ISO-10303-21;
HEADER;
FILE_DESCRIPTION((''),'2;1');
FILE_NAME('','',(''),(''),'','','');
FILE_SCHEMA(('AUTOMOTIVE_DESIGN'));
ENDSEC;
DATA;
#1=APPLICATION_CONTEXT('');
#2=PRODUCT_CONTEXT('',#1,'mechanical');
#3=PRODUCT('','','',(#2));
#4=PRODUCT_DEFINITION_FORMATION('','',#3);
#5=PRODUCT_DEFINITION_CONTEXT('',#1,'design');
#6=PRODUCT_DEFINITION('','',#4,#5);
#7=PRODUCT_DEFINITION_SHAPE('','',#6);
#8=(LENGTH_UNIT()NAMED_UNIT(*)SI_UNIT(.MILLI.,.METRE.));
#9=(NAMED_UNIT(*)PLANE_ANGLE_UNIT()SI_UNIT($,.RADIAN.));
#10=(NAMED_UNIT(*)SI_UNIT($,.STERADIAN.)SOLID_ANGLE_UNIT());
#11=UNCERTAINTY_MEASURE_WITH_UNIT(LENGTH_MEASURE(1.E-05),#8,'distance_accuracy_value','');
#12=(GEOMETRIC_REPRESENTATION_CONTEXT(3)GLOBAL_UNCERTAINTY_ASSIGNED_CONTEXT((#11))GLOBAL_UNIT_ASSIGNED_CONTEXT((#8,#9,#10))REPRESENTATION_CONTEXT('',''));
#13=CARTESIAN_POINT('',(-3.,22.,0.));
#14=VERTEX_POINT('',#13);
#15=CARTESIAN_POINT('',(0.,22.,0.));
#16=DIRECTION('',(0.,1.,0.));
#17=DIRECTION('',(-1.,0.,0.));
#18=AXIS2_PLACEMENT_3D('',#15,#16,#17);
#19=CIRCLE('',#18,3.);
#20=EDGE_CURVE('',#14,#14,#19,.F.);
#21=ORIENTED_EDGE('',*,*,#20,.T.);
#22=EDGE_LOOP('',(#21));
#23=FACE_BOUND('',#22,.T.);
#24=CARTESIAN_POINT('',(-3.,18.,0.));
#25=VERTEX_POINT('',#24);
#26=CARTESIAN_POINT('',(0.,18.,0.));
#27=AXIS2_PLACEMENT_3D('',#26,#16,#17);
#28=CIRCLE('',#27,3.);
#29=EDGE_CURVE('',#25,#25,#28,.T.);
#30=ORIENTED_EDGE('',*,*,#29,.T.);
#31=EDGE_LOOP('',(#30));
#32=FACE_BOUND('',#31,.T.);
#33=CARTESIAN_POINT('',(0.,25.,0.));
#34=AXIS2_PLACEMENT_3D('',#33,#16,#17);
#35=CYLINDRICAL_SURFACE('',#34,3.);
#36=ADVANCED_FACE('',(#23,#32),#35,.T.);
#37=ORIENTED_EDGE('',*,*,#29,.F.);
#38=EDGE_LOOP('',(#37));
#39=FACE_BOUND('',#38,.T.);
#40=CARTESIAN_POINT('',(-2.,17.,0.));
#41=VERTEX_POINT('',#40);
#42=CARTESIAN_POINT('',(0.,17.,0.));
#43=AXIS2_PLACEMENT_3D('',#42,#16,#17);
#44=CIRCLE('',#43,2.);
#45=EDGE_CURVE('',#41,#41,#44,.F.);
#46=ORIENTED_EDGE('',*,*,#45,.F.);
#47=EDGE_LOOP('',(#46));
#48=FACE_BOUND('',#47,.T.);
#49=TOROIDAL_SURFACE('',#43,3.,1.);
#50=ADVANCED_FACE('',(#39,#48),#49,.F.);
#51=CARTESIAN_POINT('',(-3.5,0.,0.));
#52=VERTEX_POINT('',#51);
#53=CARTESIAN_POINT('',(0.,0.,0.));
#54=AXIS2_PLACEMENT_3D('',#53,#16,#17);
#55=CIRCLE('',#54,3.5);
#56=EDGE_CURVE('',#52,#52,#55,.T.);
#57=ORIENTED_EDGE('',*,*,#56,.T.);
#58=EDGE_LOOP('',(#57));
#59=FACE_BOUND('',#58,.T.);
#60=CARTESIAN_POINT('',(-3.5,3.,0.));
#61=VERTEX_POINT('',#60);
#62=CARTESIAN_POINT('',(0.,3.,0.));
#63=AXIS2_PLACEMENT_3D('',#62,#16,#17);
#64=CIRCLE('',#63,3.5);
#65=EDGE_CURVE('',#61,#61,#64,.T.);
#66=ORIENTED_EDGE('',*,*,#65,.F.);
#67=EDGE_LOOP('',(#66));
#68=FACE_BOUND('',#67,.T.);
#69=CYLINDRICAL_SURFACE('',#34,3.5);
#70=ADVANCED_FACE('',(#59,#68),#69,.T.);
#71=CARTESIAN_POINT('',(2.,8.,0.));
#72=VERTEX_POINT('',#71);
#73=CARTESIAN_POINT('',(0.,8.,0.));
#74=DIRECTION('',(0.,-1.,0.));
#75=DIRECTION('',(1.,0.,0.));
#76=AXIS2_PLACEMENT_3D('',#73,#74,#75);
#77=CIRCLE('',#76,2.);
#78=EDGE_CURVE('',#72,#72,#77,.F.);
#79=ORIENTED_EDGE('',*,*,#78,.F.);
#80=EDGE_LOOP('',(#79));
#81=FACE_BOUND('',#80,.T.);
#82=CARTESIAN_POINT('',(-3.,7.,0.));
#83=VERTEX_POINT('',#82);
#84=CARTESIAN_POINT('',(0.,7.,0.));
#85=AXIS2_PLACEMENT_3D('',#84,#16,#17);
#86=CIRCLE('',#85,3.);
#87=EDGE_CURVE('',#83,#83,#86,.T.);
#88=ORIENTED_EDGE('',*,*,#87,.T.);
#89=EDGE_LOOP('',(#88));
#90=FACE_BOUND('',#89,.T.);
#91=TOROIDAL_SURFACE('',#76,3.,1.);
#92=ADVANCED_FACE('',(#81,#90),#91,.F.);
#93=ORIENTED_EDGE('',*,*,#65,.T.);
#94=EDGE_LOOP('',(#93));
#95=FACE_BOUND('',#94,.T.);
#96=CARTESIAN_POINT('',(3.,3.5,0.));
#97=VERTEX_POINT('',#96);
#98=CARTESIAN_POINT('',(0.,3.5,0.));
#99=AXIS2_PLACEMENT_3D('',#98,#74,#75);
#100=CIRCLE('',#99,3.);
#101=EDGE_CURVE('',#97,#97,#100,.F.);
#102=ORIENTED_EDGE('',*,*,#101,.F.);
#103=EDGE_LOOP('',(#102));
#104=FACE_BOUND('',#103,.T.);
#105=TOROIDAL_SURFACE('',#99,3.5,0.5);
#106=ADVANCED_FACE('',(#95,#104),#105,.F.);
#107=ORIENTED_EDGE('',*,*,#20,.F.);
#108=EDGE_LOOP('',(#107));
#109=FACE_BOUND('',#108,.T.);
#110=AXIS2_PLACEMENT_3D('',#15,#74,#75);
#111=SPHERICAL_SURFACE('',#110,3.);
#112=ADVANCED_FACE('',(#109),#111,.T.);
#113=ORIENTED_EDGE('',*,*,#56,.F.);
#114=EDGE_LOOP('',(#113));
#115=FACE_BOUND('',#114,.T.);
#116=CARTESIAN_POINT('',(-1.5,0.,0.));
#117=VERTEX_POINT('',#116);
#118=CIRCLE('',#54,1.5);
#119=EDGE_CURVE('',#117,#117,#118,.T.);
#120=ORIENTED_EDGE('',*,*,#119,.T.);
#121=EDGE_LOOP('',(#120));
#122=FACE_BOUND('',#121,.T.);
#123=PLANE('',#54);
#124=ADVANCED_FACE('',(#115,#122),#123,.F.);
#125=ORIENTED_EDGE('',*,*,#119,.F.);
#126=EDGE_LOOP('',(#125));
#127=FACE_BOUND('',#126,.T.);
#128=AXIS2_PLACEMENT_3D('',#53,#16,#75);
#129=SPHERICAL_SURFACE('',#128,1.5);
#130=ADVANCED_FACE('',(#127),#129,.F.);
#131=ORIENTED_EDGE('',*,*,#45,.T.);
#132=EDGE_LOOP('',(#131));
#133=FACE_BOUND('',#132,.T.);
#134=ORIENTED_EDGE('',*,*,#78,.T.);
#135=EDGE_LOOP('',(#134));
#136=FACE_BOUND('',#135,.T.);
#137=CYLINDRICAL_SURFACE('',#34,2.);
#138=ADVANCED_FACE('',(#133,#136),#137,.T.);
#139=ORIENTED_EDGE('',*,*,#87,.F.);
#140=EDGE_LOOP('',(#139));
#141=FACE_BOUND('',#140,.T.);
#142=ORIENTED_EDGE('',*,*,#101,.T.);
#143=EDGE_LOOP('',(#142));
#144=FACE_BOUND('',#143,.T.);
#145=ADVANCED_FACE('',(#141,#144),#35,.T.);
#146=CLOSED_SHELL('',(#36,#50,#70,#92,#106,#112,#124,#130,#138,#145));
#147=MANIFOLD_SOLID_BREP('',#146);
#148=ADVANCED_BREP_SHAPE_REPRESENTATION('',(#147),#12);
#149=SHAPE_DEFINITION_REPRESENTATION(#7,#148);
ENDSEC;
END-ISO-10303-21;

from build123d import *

# Parameters (mm, degrees)
FILLET1_R = 3
FILLET2_R = 1
FILLET3_R = 0.5


with BuildPart() as part:
    # Sketch1 → Revolve1 (revolve)
    with BuildSketch(Plane.XY, mode=Mode.PRIVATE) as revolve1_sk:
        Polygon((0, 0), (3.5, 0), (3.5, 3), (3, 3), (3, 7), (2, 7), (2, 18), (3, 18), (3, 25), (0, 25), align=None)
    revolve(revolve1_sk.sketch.rotate(Axis((0, 25, 0), (0, -1, 0)), 180), axis=Axis((0, 25, 0), (0, -1, 0)))

    # Fillet1
    fillet1_edges = [part.edges().sort_by_distance(p)[0] for p in [
        (3, 25, 0),
    ]]
    fillet(fillet1_edges, radius=FILLET1_R)

    # Fillet2
    fillet2_edges = [part.edges().sort_by_distance(p)[0] for p in [
        (2, 18, 0),
        (2, 7, 0),
    ]]
    fillet(fillet2_edges, radius=FILLET2_R - 0.0001)  # a hair under: the kernel refuses the full size

    # Fillet3
    fillet3_edges = [part.edges().sort_by_distance(p)[0] for p in [
        (3, 3, 0),
    ]]
    fillet(fillet3_edges, radius=FILLET3_R - 0.0001)  # a hair under: the kernel refuses the full size

    # Sketch2 → Cut-Revolve1 (revolve, cut)
    with BuildSketch(Plane.XY, mode=Mode.PRIVATE) as cut_revolve1_sk:
        with BuildLine():
            Line((0, 1.5), (0, 0))
            Line((0, 0), (1.5, 0))
            ThreePointArc((1.5, 0), (1.060660172, 1.060660172), (0, 1.5))
        make_face()
    revolve(cut_revolve1_sk.sketch.rotate(Axis((0, 1.5, 0), (0, -1, 0)), 180), axis=Axis((0, 1.5, 0), (0, -1, 0)), mode=Mode.SUBTRACT)


solid = part.part
